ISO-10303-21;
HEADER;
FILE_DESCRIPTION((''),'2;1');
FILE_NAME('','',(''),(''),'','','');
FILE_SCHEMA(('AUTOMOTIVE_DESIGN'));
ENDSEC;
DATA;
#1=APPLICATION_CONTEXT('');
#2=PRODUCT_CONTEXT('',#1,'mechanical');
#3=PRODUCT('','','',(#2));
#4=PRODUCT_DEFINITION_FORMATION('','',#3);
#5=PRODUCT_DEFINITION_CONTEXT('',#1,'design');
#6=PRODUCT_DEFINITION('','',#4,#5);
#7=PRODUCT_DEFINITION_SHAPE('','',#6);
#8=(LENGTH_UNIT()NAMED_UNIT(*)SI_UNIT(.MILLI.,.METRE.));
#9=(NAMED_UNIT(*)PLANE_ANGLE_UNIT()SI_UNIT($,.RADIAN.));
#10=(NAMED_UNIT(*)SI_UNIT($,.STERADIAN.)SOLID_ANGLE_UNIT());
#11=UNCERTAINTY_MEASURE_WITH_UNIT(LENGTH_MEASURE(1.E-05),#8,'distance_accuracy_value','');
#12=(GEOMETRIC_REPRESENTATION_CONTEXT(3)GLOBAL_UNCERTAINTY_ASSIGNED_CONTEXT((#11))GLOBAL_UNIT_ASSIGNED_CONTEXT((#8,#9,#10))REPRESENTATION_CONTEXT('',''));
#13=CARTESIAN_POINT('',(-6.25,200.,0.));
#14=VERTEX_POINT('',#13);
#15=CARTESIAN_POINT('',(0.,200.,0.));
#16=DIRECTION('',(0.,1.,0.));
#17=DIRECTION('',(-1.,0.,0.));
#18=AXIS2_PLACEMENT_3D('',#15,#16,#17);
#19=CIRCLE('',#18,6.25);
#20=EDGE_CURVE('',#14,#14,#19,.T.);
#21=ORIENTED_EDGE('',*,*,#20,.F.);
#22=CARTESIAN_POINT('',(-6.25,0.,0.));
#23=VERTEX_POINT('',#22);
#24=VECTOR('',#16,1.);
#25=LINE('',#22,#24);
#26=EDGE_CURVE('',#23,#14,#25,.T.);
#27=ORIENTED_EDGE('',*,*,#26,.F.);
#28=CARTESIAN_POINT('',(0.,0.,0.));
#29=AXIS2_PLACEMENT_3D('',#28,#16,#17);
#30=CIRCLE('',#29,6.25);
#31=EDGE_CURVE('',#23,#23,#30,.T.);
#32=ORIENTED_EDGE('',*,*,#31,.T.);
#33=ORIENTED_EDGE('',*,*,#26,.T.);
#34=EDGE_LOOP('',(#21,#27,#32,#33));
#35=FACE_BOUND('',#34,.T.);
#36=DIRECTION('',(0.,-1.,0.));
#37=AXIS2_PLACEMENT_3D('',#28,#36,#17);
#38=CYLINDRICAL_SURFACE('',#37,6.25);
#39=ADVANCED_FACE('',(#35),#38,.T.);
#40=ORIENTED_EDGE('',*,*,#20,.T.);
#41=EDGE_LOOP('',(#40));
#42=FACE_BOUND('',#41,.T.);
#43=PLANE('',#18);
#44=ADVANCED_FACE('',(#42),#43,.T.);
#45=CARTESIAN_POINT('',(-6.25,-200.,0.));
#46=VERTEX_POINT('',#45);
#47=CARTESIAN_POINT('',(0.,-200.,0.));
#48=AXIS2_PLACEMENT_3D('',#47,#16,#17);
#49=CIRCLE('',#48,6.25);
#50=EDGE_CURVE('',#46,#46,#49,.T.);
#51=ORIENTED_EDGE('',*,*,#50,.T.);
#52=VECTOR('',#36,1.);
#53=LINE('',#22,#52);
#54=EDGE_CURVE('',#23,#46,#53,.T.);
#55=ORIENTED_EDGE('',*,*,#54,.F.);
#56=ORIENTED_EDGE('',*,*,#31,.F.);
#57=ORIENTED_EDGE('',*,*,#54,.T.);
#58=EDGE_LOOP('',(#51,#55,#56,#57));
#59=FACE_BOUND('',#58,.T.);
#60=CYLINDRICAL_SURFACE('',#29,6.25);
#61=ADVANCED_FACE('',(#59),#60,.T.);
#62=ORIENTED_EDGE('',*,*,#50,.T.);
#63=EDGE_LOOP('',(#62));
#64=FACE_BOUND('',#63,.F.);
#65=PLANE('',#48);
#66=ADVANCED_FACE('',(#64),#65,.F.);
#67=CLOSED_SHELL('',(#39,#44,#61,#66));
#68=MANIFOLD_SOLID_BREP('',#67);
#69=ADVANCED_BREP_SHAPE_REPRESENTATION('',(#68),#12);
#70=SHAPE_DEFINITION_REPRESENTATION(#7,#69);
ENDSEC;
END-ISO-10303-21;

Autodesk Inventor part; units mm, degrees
ref_plane "YZ Plane" through (0, 0, 0) normal (1, 0, 0) x (0, 1, 0)
ref_plane "XZ Plane" through (0, 0, 0) normal (0, 1, 0) x (-1, 0, 0)
ref_plane "XY Plane" through (0, 0, 0) normal (0, 0, 1) x (1, 0, 0)
sketch "Sketch1" plane through (0, 0, 0) normal (0, 1, 0) x (-1, 0, 0)
  circle A0 centre (0, 0) radius 6.25
  dimension "d0" = 12.5
extrude "Extrusion1" add sketch "Sketch1" along normal mid plane 400
thread "Thread1" size "M14x2" class "6g" standard "ANSI Metric M Profile" length 37
properties part number "Strut" material "Aluminum 6061"
